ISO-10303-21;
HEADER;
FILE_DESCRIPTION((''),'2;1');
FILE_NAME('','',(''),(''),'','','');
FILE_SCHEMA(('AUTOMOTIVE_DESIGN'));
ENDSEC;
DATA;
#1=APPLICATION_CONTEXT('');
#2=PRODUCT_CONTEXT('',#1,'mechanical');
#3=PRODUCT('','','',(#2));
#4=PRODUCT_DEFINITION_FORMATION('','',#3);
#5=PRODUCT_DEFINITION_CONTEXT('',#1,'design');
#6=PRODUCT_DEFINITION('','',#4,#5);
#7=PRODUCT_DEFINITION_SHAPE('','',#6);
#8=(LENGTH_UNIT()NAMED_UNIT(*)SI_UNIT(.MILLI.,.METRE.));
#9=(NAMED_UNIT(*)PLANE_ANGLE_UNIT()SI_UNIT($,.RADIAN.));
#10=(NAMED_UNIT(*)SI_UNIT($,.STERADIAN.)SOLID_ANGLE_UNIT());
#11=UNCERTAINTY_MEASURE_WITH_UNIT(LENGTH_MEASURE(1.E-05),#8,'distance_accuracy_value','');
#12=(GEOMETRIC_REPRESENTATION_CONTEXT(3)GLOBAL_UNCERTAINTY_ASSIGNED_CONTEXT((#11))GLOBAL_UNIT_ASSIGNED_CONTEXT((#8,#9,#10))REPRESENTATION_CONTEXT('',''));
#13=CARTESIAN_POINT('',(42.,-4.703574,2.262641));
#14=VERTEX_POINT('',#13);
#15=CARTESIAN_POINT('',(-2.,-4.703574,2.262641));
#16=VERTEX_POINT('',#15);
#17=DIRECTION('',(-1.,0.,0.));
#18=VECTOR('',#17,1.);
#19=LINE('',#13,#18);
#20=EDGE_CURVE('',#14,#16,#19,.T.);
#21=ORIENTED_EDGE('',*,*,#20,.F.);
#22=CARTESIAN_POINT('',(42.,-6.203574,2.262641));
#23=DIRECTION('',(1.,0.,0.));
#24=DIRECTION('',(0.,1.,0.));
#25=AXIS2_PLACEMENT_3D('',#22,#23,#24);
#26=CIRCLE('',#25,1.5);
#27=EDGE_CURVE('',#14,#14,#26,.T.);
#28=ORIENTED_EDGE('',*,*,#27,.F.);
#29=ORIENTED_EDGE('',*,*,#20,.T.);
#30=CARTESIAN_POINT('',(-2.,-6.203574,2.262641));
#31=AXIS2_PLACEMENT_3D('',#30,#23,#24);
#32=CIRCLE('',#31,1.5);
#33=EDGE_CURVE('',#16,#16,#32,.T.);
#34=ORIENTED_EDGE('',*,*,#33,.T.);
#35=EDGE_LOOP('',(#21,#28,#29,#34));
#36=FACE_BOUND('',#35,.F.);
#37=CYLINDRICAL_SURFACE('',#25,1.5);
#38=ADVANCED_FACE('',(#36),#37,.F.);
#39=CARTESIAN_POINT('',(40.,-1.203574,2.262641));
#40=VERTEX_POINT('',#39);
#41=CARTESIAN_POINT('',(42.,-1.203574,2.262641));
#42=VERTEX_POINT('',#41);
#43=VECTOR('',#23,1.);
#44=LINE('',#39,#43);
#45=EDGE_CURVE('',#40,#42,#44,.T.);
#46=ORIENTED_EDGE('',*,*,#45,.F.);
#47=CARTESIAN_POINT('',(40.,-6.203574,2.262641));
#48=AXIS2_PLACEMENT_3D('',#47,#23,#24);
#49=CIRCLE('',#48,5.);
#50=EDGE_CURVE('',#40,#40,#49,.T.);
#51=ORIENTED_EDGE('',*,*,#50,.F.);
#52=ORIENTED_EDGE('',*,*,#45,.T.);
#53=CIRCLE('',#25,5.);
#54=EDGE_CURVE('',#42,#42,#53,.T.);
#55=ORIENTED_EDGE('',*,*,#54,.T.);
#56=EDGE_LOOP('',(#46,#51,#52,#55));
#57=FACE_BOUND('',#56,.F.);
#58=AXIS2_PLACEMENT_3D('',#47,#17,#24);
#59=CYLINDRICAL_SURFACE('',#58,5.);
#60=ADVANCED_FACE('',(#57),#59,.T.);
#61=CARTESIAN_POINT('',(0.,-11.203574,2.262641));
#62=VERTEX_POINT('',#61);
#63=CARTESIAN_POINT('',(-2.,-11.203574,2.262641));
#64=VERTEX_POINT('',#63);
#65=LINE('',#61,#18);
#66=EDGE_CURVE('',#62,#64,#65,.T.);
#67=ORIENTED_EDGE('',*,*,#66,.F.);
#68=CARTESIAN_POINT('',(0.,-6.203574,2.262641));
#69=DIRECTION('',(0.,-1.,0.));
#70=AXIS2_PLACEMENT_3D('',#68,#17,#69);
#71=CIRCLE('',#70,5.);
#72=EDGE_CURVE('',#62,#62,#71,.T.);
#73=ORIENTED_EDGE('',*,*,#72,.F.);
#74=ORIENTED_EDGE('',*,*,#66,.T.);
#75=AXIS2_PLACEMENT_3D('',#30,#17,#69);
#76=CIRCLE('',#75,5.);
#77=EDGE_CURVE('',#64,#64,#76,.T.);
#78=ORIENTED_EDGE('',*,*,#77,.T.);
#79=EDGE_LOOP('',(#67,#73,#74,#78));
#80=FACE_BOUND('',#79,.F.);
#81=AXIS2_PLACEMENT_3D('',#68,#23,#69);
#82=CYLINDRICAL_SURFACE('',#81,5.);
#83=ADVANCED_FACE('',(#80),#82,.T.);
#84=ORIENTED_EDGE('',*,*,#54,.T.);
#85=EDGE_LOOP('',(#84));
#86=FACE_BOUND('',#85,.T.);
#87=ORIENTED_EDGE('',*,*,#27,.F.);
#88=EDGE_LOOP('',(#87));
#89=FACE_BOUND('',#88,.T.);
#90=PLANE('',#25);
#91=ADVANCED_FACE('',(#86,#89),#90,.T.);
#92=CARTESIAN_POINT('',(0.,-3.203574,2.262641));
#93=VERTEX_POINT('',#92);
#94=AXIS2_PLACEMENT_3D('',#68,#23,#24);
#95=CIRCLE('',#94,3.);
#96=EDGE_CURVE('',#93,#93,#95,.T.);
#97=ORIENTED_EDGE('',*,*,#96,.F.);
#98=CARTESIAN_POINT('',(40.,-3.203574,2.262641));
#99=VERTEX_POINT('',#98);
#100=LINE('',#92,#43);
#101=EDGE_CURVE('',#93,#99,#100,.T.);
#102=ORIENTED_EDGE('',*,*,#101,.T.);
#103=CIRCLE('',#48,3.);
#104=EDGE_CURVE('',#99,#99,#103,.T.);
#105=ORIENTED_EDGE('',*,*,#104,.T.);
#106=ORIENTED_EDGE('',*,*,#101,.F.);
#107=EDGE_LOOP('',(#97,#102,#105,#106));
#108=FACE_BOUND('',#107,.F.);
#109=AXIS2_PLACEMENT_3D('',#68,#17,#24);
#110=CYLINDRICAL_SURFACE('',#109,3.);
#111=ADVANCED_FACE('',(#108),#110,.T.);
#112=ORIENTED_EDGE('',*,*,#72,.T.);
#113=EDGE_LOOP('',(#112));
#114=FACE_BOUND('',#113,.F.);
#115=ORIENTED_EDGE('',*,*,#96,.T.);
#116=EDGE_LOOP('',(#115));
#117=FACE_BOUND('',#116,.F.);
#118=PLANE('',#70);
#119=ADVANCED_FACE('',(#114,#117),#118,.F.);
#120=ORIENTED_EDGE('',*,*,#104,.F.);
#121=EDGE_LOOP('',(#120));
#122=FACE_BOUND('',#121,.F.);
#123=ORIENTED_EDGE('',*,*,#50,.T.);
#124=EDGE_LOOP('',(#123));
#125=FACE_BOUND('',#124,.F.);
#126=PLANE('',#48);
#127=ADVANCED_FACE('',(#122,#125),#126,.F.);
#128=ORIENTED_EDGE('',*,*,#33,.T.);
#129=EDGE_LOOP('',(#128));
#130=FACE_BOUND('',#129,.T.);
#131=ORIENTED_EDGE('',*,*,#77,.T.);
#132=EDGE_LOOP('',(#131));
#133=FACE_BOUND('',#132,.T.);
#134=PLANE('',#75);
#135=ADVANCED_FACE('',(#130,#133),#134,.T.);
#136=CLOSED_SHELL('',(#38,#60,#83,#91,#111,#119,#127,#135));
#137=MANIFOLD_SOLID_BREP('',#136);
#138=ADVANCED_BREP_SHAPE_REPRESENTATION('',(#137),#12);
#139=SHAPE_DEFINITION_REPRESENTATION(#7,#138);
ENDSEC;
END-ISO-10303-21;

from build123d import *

# Parameters (mm, degrees)
F0_R     = 3
F1_DEPTH = 40
F2_R     = 5
F2_R_2   = 3
F3_DEPTH = 2
F4_R     = 5
F4_R_2   = 3
F5_DEPTH = 2
F6_R     = 1.5
F7_DEPTH = 44


with BuildPart() as f1:
    # F0 (on Right) → F1 (new body)
    with BuildSketch(Plane.YZ):
        with Locations((-6.2035736628, 2.2626414429)):
            Circle(F0_R)
    extrude(amount=F1_DEPTH)

    # F2 (on face) → F3 (join)
    with BuildSketch(Plane.YZ.offset(40)):
        with Locations((-6.2035736628, 2.2626414429)):
            Circle(F2_R)
        with Locations((-6.2035736628, 2.2626414429)):
            Circle(F2_R_2, mode=Mode.SUBTRACT)
        with Locations((-6.2035736628, 2.2626414429)):
            Circle(F2_R_2)
    extrude(amount=F3_DEPTH)

    # F4 (on face) → F5 (join)
    with BuildSketch(Plane(origin=(0, 0, 0), x_dir=(0, -1, 0), z_dir=(-1, 0, 0))):
        with Locations((6.2035736628, 2.2626414429)):
            Circle(F4_R)
        with Locations((6.2035736628, 2.2626414429)):
            Circle(F4_R_2, mode=Mode.SUBTRACT)
        with Locations((6.2035736628, 2.2626414429)):
            Circle(F4_R_2)
    extrude(amount=F5_DEPTH)

    # F6 (on face) → F7 (cut)
    with BuildSketch(Plane.YZ.offset(42)):
        with Locations((-6.2035736628, 2.2626414429)):
            Circle(F6_R)
    extrude(amount=-F7_DEPTH, mode=Mode.SUBTRACT)


solid = f1.part
